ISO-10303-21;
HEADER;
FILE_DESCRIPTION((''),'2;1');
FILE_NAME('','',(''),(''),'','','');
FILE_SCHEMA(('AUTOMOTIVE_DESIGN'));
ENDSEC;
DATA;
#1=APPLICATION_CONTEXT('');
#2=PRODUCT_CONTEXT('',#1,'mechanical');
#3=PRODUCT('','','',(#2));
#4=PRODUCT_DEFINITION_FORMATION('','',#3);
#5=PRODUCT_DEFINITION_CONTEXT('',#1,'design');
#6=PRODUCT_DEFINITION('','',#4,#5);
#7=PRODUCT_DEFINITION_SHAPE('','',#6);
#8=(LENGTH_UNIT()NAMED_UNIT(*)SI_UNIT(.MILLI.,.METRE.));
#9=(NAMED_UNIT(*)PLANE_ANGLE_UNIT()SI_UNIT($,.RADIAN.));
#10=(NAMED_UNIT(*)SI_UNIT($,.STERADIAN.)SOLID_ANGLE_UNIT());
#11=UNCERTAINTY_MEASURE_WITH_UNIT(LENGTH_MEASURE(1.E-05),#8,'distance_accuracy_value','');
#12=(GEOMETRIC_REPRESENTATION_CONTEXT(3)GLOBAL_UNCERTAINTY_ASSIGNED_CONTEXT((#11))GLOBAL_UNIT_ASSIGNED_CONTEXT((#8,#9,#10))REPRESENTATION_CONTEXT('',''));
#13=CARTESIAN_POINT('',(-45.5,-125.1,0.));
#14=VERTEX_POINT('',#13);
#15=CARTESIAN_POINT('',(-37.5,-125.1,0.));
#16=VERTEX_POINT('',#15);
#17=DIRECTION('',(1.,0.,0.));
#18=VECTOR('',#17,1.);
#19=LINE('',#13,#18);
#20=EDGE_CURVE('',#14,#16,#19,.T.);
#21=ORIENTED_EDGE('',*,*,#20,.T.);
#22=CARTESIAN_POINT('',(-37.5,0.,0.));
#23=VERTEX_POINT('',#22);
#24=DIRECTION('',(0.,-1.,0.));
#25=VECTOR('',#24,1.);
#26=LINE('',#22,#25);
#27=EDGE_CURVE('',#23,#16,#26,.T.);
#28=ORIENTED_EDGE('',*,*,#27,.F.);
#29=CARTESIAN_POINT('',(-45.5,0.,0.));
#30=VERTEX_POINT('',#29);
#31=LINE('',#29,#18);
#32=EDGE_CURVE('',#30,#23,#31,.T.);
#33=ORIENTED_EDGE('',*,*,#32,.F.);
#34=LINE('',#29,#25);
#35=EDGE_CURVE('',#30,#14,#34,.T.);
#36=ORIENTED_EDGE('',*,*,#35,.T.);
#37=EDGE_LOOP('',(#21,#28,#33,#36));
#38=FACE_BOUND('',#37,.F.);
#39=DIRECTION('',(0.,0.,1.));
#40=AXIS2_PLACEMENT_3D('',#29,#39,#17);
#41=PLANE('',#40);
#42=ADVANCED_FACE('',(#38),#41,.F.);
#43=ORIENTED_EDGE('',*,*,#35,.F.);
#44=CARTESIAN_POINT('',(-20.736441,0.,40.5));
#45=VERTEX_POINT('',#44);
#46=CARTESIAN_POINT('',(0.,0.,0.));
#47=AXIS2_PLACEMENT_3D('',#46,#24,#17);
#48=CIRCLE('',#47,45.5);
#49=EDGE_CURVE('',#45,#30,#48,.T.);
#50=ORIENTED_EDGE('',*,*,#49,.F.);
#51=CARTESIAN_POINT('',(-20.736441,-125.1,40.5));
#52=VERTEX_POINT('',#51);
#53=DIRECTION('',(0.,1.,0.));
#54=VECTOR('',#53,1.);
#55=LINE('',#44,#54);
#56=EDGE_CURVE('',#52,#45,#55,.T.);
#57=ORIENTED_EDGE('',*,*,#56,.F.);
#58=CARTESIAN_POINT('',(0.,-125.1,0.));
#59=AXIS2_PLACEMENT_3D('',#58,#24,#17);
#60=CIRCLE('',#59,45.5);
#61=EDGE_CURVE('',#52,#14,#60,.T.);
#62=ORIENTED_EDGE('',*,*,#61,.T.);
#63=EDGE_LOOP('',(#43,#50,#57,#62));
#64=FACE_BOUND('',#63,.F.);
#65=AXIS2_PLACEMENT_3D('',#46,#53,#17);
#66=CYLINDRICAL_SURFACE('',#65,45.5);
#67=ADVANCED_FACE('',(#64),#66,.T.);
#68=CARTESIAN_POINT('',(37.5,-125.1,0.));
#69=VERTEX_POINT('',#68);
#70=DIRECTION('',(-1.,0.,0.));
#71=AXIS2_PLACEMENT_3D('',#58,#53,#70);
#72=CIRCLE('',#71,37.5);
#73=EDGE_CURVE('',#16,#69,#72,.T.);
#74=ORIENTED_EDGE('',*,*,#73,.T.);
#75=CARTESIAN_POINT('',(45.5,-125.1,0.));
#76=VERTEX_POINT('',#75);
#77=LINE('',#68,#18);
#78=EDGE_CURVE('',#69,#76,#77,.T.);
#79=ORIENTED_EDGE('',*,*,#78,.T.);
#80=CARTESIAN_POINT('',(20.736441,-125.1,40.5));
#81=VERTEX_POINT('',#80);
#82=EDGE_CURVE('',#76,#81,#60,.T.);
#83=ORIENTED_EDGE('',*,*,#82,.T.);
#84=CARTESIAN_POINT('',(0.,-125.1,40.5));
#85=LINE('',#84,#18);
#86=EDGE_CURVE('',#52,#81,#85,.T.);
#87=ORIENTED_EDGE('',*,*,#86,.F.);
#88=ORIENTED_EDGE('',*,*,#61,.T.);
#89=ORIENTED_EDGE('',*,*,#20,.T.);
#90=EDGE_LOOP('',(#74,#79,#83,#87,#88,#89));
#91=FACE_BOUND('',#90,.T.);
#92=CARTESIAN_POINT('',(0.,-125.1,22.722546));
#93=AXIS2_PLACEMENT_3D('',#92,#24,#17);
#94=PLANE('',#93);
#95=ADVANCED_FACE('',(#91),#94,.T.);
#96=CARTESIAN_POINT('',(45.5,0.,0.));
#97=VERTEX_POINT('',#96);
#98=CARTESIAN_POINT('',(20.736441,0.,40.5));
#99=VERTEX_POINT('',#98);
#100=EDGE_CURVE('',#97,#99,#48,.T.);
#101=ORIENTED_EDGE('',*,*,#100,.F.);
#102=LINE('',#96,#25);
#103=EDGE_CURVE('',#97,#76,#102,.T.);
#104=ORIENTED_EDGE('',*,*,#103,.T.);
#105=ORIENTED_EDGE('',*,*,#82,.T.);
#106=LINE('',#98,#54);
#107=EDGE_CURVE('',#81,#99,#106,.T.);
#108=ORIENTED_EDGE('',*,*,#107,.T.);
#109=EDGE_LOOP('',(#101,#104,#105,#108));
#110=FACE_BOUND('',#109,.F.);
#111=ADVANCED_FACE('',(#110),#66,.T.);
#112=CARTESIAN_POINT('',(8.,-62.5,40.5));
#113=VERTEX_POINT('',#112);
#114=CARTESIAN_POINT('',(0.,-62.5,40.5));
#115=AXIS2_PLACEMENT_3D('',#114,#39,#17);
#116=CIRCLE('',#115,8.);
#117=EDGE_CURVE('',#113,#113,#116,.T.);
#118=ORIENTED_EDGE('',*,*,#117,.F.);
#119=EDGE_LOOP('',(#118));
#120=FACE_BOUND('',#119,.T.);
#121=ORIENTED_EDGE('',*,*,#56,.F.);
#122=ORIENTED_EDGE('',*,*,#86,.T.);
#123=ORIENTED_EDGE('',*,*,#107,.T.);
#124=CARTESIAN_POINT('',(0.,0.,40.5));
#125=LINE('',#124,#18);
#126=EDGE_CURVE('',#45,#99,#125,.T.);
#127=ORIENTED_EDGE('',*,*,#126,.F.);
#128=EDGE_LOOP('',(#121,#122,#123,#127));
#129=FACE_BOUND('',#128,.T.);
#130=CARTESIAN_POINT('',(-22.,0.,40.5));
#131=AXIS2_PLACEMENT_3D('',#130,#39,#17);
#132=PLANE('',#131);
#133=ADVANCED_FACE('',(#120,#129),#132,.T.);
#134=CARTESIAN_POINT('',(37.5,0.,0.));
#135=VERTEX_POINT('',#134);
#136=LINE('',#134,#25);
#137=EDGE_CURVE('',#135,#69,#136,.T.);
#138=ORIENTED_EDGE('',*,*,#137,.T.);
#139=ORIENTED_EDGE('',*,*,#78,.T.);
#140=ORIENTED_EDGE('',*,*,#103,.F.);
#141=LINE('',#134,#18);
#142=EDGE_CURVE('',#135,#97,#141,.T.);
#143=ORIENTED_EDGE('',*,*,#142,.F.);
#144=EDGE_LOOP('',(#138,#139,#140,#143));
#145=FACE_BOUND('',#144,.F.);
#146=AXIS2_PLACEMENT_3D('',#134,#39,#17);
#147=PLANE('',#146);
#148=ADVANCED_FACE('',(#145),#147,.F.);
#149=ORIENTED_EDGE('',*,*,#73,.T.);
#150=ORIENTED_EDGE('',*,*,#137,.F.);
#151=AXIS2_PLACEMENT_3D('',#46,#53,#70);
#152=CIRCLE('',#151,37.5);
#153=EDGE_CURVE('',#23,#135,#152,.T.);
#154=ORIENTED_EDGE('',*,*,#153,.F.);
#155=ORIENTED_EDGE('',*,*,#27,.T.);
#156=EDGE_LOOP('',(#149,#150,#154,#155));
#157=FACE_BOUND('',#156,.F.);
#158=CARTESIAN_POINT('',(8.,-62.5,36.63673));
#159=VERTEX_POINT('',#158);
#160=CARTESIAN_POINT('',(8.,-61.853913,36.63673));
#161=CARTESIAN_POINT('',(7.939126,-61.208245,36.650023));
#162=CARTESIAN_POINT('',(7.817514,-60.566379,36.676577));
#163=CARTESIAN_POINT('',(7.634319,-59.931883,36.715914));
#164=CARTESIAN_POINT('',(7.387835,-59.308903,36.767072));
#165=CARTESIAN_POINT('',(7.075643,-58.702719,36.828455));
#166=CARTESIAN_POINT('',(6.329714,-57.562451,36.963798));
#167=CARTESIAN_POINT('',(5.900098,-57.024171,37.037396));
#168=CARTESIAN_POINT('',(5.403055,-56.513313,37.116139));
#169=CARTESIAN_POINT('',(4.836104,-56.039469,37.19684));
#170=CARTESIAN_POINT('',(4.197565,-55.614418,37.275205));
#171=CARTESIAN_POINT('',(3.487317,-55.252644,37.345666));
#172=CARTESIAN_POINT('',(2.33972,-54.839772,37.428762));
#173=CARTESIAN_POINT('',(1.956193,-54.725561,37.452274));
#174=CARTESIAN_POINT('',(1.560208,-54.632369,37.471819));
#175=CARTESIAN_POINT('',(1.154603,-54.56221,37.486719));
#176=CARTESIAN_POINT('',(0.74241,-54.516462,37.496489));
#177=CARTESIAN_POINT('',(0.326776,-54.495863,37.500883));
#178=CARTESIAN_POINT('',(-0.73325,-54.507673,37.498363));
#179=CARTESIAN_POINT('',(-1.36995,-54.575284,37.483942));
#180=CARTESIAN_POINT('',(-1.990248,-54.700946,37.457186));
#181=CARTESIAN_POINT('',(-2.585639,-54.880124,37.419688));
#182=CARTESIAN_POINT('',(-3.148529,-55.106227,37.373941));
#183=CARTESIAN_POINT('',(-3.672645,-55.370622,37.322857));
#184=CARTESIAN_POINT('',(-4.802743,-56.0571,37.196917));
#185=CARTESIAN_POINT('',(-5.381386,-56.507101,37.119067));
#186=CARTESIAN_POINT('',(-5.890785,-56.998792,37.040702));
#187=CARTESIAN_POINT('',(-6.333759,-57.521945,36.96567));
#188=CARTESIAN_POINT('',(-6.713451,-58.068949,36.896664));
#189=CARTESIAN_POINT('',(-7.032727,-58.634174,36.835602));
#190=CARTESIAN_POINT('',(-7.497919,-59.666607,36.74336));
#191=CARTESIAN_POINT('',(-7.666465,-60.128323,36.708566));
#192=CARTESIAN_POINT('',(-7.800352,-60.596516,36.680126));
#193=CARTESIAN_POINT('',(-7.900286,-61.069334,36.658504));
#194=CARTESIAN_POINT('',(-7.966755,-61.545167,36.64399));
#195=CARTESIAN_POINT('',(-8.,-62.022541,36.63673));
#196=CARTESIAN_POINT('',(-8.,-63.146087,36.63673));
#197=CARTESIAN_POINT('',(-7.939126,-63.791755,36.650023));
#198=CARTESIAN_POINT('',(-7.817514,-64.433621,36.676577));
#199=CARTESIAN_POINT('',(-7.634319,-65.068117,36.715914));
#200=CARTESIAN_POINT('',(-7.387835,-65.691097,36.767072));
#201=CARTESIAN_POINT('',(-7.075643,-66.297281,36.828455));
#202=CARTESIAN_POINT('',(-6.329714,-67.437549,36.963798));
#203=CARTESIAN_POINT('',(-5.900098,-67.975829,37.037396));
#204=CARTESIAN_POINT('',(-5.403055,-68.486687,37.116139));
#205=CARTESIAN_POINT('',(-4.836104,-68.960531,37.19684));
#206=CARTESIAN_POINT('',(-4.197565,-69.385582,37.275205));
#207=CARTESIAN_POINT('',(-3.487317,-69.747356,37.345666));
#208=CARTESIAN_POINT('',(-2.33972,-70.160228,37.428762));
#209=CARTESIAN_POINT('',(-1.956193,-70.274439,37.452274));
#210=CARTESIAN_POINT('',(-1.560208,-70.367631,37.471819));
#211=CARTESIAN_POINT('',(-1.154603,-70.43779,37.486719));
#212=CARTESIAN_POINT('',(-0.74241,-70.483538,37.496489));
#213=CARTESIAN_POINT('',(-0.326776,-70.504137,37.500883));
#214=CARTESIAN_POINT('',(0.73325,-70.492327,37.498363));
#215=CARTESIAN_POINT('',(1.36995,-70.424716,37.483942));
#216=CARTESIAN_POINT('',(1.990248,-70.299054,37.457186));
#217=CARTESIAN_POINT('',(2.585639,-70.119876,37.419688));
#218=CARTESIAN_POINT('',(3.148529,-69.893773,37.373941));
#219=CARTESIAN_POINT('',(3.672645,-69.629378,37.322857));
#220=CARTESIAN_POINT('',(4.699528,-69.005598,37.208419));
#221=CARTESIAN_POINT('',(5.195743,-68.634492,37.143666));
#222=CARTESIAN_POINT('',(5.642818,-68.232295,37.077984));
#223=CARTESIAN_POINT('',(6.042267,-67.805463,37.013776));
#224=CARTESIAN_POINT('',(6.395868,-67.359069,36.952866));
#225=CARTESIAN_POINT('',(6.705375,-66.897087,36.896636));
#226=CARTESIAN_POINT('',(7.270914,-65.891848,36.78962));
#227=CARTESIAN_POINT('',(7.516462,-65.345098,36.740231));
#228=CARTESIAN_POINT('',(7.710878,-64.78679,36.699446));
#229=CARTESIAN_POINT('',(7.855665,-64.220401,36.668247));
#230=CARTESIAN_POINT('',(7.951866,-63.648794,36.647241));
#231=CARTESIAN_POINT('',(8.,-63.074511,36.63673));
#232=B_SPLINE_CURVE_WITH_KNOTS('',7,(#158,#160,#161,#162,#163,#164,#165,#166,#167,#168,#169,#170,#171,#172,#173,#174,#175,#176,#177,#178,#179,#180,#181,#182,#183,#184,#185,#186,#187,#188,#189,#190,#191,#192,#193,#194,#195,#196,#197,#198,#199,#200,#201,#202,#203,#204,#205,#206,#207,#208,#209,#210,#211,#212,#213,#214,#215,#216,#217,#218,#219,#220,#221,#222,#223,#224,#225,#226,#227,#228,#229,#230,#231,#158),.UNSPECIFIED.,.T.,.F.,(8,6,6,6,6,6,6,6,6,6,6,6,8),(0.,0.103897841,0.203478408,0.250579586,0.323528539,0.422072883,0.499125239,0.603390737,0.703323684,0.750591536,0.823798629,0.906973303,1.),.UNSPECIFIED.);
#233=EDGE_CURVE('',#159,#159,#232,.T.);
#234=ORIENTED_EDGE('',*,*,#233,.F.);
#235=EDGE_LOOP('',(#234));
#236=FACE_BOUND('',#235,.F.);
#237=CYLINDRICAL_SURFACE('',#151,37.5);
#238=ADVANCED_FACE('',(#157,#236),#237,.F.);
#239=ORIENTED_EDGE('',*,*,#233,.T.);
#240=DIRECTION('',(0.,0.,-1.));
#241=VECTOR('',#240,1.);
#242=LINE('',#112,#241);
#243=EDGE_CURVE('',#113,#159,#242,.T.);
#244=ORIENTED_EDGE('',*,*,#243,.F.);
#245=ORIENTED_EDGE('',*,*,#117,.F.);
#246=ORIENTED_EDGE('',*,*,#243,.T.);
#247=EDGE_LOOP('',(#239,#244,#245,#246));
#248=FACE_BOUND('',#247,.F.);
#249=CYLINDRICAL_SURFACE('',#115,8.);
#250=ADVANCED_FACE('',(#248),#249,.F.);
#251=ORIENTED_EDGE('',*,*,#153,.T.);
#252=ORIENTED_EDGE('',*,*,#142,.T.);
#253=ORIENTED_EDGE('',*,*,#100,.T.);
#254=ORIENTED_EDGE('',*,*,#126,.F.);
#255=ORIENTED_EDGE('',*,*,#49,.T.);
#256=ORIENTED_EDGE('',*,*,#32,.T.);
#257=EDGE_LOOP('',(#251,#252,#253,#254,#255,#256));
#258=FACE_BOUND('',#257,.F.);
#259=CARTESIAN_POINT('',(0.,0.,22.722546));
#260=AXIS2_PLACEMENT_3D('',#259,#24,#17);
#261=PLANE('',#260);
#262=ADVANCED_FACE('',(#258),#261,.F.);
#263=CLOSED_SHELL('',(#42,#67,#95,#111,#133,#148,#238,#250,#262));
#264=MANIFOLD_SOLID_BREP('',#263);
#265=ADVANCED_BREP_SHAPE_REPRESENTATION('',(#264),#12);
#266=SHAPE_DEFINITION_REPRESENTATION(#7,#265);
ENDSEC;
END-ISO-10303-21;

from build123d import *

# Parameters (mm, degrees)
F1_DEPTH = 125.1
F2_W     = 44
F2_H     = 8.367
F3_DEPTH = 125.1
F4_R     = 8
F5_DEPTH = 4


with BuildPart() as f1:
    # F0 (on Front) → F1 (new body)
    with BuildSketch(Plane.XZ):
        with BuildLine():
            ThreePointArc((-37.5, 0), (0, 37.5), (37.5, 0))
            Line((37.5, 0), (45.5, 0))
            ThreePointArc((45.5, 0), (0, 45.5), (-45.5, 0))
            Line((-45.5, 0), (-37.5, 0))
        make_face()
    extrude(amount=F1_DEPTH)

    # F2 (on Front) → F3 (cut)
    with BuildSketch(Plane.XZ):
        with Locations((0, 44.6835)):
            Rectangle(F2_W, F2_H)
    extrude(amount=F3_DEPTH, mode=Mode.SUBTRACT)

    # F4 (on face) → F5 (cut)
    with BuildSketch(Plane.XY.offset(40.5)):
        with Locations((0, -62.5)):
            Circle(F4_R)
    extrude(amount=-F5_DEPTH, mode=Mode.SUBTRACT)


solid = f1.part
